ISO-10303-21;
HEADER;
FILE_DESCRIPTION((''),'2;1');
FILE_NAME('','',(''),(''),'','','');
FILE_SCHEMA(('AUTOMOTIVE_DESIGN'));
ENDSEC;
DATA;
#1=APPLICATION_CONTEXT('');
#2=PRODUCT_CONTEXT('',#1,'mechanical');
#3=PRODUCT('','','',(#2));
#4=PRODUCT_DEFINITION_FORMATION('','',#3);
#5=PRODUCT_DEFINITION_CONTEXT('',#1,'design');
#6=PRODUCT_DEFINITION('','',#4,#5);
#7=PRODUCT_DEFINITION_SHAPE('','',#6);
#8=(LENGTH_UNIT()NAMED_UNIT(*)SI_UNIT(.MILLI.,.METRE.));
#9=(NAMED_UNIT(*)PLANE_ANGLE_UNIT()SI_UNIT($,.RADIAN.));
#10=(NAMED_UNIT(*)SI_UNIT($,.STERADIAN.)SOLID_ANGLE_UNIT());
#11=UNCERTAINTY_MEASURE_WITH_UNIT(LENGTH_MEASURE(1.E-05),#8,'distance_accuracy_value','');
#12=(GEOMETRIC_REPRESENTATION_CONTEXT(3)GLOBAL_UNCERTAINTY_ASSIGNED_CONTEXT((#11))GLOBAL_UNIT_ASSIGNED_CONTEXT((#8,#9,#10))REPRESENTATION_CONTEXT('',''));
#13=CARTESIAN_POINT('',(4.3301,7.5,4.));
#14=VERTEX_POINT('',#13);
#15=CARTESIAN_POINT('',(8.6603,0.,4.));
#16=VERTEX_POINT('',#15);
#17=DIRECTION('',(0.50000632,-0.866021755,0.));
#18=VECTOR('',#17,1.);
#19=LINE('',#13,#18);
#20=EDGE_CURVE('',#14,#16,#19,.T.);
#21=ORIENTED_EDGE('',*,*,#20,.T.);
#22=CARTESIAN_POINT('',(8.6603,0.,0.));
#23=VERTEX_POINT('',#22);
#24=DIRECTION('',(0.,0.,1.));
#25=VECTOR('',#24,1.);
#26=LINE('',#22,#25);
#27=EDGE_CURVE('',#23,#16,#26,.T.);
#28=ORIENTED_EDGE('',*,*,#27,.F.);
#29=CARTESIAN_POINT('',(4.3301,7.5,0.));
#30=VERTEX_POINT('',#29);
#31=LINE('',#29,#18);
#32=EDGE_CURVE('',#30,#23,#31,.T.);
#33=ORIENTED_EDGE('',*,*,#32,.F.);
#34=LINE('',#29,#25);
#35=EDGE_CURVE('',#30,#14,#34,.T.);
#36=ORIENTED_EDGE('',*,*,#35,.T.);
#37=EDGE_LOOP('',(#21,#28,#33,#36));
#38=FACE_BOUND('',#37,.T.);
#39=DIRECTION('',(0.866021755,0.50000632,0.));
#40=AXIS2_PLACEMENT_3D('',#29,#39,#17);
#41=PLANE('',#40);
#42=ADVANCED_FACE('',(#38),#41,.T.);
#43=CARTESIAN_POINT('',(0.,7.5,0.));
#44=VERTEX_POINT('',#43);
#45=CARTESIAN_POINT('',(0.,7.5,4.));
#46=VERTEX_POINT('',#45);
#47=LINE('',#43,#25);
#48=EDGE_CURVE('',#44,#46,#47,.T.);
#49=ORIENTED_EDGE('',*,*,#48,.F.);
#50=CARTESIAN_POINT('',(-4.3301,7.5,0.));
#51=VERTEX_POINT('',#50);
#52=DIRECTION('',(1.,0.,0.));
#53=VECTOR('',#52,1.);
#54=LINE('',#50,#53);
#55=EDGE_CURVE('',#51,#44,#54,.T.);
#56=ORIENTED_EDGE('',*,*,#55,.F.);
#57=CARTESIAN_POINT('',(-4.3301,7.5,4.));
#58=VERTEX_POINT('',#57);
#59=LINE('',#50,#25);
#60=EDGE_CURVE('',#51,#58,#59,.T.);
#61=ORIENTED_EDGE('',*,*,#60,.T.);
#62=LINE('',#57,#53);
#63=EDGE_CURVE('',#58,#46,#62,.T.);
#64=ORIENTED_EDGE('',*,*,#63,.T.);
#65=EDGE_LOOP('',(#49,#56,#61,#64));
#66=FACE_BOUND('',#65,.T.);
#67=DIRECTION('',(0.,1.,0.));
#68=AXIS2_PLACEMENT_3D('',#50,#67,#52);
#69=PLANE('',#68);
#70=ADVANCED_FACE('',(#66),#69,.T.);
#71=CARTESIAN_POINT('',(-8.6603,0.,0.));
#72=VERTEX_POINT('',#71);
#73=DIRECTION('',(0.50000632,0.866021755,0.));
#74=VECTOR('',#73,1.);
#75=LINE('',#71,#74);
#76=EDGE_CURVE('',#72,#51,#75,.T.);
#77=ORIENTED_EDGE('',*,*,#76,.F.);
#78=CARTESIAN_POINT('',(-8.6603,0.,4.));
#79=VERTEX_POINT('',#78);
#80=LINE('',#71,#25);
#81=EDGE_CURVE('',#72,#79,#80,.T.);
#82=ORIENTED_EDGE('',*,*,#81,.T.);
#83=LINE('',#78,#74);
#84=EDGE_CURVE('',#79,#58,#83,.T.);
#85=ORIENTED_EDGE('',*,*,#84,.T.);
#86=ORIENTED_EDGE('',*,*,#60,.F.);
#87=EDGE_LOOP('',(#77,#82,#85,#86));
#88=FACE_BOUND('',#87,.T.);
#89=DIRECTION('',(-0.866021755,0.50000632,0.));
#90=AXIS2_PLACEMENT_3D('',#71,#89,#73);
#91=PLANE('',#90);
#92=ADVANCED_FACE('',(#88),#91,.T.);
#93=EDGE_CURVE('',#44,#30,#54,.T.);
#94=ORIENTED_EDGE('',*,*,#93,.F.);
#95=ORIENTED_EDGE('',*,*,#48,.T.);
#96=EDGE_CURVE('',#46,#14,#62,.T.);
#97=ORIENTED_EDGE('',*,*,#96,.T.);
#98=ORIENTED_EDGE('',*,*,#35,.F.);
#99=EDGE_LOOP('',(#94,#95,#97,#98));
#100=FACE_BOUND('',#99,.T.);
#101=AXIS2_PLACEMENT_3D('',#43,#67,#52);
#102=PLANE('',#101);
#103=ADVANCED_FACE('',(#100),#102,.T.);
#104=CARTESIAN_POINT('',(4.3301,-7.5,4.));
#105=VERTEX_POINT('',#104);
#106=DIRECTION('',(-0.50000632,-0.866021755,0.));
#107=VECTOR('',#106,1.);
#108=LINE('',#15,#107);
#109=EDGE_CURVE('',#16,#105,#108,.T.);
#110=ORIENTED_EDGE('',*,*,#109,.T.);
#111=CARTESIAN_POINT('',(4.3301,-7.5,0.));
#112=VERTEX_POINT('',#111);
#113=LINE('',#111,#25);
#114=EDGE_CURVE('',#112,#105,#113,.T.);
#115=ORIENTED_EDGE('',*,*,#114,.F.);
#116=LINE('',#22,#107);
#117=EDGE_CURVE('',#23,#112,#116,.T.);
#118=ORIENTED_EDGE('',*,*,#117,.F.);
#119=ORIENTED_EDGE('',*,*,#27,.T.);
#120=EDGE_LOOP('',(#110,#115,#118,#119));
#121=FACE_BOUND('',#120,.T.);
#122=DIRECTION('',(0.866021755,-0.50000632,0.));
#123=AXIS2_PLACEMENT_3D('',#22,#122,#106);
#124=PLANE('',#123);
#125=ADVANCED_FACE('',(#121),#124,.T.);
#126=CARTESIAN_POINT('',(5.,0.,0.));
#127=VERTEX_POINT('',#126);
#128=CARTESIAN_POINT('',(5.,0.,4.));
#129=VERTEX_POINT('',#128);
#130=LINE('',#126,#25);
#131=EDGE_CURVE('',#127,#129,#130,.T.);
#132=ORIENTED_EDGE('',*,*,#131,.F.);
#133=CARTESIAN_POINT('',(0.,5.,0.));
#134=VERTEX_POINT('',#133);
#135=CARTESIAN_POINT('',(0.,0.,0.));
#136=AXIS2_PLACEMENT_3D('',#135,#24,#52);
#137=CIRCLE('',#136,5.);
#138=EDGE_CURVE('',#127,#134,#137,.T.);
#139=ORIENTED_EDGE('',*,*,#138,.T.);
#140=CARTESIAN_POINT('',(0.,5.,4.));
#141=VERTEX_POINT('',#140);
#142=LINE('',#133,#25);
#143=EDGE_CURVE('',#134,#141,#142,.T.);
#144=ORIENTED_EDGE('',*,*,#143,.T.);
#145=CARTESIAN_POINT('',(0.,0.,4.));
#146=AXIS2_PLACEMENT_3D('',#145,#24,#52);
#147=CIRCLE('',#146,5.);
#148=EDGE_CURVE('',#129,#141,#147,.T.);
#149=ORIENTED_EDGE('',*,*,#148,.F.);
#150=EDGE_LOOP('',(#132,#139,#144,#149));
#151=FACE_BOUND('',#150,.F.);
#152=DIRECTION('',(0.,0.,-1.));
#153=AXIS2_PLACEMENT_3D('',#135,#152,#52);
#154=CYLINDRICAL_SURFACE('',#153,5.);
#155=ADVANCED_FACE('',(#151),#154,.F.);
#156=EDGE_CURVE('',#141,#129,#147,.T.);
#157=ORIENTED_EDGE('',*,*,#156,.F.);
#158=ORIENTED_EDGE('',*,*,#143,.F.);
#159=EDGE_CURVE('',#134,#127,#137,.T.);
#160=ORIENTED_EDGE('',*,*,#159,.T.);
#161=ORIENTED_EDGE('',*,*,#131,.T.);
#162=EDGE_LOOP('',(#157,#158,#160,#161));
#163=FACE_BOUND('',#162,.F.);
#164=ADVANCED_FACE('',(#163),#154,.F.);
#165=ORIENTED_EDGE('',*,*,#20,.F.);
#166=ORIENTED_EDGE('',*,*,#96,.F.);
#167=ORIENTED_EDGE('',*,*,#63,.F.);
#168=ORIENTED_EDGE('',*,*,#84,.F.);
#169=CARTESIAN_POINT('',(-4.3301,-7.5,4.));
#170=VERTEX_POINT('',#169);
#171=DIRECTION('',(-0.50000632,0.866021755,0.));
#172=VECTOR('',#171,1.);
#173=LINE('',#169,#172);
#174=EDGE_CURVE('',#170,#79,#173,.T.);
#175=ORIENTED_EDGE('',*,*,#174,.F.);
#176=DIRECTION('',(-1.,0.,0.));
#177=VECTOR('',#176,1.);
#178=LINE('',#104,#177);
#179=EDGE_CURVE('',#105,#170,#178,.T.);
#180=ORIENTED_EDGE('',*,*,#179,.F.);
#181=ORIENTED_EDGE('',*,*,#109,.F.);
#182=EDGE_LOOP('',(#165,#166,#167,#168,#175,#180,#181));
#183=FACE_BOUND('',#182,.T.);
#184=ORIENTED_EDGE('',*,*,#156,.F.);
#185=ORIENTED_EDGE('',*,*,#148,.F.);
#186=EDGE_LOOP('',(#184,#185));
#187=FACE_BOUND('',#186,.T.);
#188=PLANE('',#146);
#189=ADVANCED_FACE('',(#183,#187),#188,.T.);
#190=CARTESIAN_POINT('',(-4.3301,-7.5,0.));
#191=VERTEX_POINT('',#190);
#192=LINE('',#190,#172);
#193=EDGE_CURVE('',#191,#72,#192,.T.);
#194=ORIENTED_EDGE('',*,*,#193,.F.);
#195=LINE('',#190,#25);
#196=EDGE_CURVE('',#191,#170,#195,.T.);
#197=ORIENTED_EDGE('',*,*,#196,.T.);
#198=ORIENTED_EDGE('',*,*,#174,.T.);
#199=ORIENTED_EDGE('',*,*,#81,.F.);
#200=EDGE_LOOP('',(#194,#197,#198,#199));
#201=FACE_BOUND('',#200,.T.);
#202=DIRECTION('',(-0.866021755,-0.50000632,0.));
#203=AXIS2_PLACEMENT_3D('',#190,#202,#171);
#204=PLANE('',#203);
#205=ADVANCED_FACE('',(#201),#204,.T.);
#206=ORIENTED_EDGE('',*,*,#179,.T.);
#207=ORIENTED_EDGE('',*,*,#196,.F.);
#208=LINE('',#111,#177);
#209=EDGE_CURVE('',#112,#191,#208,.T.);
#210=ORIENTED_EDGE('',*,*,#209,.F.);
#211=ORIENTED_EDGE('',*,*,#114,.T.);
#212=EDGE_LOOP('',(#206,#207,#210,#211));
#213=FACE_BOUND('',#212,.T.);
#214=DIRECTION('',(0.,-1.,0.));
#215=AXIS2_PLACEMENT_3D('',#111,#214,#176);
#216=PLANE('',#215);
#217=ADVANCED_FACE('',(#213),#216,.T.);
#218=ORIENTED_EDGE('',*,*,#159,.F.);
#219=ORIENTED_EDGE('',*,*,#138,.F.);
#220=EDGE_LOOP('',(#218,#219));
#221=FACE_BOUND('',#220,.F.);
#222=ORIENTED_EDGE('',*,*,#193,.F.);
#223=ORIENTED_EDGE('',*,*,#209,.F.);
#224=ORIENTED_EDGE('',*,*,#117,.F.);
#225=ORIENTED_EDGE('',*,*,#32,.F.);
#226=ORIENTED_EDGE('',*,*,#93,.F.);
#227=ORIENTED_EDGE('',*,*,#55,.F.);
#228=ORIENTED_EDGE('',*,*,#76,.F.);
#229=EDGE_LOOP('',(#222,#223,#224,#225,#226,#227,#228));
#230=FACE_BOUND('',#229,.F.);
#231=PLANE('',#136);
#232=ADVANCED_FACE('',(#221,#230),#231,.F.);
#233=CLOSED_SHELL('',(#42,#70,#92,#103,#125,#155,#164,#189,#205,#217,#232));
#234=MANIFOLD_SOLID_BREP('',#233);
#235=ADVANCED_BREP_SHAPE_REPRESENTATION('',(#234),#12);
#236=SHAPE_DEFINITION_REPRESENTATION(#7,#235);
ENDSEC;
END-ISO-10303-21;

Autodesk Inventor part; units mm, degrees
ref_plane "YZ Plane" through (0, 0, 0) normal (1, 0, 0) x (0, 1, 0)
ref_plane "XZ Plane" through (0, 0, 0) normal (0, 1, 0) x (-1, 0, 0)
ref_plane "XY Plane" through (0, 0, 0) normal (0, 0, 1) x (1, 0, 0)
sketch "草图1" plane through (0, 0, 0) normal (0, 0, 1) x (1, 0, 0)
  circle A0 centre (0, 0) radius 5
  line L0 (4.3301, -7.5) -> (-4.3301, -7.5)
  line L1 (-4.3301, -7.5) -> (-8.6603, 0)
  line L2 (-8.6603, 0) -> (-4.3301, 7.5)
  line L3 (-4.3301, 7.5) -> (4.3301, 7.5)
  line L4 (4.3301, 7.5) -> (8.6603, 0)
  line L5 (8.6603, 0) -> (4.3301, -7.5)
  line L6 (0, 0) -> (0, 7.5)
  dimension "d0" = 10
  dimension "d1" = 15
extrude "拉伸1" add sketch "草图1" along normal blind 4
thread "螺纹1" size "M10x1.5" class "6H" standard "ANSI Metric M Profile" full length
properties part number "刀轴带动盘连杆销螺帽"
